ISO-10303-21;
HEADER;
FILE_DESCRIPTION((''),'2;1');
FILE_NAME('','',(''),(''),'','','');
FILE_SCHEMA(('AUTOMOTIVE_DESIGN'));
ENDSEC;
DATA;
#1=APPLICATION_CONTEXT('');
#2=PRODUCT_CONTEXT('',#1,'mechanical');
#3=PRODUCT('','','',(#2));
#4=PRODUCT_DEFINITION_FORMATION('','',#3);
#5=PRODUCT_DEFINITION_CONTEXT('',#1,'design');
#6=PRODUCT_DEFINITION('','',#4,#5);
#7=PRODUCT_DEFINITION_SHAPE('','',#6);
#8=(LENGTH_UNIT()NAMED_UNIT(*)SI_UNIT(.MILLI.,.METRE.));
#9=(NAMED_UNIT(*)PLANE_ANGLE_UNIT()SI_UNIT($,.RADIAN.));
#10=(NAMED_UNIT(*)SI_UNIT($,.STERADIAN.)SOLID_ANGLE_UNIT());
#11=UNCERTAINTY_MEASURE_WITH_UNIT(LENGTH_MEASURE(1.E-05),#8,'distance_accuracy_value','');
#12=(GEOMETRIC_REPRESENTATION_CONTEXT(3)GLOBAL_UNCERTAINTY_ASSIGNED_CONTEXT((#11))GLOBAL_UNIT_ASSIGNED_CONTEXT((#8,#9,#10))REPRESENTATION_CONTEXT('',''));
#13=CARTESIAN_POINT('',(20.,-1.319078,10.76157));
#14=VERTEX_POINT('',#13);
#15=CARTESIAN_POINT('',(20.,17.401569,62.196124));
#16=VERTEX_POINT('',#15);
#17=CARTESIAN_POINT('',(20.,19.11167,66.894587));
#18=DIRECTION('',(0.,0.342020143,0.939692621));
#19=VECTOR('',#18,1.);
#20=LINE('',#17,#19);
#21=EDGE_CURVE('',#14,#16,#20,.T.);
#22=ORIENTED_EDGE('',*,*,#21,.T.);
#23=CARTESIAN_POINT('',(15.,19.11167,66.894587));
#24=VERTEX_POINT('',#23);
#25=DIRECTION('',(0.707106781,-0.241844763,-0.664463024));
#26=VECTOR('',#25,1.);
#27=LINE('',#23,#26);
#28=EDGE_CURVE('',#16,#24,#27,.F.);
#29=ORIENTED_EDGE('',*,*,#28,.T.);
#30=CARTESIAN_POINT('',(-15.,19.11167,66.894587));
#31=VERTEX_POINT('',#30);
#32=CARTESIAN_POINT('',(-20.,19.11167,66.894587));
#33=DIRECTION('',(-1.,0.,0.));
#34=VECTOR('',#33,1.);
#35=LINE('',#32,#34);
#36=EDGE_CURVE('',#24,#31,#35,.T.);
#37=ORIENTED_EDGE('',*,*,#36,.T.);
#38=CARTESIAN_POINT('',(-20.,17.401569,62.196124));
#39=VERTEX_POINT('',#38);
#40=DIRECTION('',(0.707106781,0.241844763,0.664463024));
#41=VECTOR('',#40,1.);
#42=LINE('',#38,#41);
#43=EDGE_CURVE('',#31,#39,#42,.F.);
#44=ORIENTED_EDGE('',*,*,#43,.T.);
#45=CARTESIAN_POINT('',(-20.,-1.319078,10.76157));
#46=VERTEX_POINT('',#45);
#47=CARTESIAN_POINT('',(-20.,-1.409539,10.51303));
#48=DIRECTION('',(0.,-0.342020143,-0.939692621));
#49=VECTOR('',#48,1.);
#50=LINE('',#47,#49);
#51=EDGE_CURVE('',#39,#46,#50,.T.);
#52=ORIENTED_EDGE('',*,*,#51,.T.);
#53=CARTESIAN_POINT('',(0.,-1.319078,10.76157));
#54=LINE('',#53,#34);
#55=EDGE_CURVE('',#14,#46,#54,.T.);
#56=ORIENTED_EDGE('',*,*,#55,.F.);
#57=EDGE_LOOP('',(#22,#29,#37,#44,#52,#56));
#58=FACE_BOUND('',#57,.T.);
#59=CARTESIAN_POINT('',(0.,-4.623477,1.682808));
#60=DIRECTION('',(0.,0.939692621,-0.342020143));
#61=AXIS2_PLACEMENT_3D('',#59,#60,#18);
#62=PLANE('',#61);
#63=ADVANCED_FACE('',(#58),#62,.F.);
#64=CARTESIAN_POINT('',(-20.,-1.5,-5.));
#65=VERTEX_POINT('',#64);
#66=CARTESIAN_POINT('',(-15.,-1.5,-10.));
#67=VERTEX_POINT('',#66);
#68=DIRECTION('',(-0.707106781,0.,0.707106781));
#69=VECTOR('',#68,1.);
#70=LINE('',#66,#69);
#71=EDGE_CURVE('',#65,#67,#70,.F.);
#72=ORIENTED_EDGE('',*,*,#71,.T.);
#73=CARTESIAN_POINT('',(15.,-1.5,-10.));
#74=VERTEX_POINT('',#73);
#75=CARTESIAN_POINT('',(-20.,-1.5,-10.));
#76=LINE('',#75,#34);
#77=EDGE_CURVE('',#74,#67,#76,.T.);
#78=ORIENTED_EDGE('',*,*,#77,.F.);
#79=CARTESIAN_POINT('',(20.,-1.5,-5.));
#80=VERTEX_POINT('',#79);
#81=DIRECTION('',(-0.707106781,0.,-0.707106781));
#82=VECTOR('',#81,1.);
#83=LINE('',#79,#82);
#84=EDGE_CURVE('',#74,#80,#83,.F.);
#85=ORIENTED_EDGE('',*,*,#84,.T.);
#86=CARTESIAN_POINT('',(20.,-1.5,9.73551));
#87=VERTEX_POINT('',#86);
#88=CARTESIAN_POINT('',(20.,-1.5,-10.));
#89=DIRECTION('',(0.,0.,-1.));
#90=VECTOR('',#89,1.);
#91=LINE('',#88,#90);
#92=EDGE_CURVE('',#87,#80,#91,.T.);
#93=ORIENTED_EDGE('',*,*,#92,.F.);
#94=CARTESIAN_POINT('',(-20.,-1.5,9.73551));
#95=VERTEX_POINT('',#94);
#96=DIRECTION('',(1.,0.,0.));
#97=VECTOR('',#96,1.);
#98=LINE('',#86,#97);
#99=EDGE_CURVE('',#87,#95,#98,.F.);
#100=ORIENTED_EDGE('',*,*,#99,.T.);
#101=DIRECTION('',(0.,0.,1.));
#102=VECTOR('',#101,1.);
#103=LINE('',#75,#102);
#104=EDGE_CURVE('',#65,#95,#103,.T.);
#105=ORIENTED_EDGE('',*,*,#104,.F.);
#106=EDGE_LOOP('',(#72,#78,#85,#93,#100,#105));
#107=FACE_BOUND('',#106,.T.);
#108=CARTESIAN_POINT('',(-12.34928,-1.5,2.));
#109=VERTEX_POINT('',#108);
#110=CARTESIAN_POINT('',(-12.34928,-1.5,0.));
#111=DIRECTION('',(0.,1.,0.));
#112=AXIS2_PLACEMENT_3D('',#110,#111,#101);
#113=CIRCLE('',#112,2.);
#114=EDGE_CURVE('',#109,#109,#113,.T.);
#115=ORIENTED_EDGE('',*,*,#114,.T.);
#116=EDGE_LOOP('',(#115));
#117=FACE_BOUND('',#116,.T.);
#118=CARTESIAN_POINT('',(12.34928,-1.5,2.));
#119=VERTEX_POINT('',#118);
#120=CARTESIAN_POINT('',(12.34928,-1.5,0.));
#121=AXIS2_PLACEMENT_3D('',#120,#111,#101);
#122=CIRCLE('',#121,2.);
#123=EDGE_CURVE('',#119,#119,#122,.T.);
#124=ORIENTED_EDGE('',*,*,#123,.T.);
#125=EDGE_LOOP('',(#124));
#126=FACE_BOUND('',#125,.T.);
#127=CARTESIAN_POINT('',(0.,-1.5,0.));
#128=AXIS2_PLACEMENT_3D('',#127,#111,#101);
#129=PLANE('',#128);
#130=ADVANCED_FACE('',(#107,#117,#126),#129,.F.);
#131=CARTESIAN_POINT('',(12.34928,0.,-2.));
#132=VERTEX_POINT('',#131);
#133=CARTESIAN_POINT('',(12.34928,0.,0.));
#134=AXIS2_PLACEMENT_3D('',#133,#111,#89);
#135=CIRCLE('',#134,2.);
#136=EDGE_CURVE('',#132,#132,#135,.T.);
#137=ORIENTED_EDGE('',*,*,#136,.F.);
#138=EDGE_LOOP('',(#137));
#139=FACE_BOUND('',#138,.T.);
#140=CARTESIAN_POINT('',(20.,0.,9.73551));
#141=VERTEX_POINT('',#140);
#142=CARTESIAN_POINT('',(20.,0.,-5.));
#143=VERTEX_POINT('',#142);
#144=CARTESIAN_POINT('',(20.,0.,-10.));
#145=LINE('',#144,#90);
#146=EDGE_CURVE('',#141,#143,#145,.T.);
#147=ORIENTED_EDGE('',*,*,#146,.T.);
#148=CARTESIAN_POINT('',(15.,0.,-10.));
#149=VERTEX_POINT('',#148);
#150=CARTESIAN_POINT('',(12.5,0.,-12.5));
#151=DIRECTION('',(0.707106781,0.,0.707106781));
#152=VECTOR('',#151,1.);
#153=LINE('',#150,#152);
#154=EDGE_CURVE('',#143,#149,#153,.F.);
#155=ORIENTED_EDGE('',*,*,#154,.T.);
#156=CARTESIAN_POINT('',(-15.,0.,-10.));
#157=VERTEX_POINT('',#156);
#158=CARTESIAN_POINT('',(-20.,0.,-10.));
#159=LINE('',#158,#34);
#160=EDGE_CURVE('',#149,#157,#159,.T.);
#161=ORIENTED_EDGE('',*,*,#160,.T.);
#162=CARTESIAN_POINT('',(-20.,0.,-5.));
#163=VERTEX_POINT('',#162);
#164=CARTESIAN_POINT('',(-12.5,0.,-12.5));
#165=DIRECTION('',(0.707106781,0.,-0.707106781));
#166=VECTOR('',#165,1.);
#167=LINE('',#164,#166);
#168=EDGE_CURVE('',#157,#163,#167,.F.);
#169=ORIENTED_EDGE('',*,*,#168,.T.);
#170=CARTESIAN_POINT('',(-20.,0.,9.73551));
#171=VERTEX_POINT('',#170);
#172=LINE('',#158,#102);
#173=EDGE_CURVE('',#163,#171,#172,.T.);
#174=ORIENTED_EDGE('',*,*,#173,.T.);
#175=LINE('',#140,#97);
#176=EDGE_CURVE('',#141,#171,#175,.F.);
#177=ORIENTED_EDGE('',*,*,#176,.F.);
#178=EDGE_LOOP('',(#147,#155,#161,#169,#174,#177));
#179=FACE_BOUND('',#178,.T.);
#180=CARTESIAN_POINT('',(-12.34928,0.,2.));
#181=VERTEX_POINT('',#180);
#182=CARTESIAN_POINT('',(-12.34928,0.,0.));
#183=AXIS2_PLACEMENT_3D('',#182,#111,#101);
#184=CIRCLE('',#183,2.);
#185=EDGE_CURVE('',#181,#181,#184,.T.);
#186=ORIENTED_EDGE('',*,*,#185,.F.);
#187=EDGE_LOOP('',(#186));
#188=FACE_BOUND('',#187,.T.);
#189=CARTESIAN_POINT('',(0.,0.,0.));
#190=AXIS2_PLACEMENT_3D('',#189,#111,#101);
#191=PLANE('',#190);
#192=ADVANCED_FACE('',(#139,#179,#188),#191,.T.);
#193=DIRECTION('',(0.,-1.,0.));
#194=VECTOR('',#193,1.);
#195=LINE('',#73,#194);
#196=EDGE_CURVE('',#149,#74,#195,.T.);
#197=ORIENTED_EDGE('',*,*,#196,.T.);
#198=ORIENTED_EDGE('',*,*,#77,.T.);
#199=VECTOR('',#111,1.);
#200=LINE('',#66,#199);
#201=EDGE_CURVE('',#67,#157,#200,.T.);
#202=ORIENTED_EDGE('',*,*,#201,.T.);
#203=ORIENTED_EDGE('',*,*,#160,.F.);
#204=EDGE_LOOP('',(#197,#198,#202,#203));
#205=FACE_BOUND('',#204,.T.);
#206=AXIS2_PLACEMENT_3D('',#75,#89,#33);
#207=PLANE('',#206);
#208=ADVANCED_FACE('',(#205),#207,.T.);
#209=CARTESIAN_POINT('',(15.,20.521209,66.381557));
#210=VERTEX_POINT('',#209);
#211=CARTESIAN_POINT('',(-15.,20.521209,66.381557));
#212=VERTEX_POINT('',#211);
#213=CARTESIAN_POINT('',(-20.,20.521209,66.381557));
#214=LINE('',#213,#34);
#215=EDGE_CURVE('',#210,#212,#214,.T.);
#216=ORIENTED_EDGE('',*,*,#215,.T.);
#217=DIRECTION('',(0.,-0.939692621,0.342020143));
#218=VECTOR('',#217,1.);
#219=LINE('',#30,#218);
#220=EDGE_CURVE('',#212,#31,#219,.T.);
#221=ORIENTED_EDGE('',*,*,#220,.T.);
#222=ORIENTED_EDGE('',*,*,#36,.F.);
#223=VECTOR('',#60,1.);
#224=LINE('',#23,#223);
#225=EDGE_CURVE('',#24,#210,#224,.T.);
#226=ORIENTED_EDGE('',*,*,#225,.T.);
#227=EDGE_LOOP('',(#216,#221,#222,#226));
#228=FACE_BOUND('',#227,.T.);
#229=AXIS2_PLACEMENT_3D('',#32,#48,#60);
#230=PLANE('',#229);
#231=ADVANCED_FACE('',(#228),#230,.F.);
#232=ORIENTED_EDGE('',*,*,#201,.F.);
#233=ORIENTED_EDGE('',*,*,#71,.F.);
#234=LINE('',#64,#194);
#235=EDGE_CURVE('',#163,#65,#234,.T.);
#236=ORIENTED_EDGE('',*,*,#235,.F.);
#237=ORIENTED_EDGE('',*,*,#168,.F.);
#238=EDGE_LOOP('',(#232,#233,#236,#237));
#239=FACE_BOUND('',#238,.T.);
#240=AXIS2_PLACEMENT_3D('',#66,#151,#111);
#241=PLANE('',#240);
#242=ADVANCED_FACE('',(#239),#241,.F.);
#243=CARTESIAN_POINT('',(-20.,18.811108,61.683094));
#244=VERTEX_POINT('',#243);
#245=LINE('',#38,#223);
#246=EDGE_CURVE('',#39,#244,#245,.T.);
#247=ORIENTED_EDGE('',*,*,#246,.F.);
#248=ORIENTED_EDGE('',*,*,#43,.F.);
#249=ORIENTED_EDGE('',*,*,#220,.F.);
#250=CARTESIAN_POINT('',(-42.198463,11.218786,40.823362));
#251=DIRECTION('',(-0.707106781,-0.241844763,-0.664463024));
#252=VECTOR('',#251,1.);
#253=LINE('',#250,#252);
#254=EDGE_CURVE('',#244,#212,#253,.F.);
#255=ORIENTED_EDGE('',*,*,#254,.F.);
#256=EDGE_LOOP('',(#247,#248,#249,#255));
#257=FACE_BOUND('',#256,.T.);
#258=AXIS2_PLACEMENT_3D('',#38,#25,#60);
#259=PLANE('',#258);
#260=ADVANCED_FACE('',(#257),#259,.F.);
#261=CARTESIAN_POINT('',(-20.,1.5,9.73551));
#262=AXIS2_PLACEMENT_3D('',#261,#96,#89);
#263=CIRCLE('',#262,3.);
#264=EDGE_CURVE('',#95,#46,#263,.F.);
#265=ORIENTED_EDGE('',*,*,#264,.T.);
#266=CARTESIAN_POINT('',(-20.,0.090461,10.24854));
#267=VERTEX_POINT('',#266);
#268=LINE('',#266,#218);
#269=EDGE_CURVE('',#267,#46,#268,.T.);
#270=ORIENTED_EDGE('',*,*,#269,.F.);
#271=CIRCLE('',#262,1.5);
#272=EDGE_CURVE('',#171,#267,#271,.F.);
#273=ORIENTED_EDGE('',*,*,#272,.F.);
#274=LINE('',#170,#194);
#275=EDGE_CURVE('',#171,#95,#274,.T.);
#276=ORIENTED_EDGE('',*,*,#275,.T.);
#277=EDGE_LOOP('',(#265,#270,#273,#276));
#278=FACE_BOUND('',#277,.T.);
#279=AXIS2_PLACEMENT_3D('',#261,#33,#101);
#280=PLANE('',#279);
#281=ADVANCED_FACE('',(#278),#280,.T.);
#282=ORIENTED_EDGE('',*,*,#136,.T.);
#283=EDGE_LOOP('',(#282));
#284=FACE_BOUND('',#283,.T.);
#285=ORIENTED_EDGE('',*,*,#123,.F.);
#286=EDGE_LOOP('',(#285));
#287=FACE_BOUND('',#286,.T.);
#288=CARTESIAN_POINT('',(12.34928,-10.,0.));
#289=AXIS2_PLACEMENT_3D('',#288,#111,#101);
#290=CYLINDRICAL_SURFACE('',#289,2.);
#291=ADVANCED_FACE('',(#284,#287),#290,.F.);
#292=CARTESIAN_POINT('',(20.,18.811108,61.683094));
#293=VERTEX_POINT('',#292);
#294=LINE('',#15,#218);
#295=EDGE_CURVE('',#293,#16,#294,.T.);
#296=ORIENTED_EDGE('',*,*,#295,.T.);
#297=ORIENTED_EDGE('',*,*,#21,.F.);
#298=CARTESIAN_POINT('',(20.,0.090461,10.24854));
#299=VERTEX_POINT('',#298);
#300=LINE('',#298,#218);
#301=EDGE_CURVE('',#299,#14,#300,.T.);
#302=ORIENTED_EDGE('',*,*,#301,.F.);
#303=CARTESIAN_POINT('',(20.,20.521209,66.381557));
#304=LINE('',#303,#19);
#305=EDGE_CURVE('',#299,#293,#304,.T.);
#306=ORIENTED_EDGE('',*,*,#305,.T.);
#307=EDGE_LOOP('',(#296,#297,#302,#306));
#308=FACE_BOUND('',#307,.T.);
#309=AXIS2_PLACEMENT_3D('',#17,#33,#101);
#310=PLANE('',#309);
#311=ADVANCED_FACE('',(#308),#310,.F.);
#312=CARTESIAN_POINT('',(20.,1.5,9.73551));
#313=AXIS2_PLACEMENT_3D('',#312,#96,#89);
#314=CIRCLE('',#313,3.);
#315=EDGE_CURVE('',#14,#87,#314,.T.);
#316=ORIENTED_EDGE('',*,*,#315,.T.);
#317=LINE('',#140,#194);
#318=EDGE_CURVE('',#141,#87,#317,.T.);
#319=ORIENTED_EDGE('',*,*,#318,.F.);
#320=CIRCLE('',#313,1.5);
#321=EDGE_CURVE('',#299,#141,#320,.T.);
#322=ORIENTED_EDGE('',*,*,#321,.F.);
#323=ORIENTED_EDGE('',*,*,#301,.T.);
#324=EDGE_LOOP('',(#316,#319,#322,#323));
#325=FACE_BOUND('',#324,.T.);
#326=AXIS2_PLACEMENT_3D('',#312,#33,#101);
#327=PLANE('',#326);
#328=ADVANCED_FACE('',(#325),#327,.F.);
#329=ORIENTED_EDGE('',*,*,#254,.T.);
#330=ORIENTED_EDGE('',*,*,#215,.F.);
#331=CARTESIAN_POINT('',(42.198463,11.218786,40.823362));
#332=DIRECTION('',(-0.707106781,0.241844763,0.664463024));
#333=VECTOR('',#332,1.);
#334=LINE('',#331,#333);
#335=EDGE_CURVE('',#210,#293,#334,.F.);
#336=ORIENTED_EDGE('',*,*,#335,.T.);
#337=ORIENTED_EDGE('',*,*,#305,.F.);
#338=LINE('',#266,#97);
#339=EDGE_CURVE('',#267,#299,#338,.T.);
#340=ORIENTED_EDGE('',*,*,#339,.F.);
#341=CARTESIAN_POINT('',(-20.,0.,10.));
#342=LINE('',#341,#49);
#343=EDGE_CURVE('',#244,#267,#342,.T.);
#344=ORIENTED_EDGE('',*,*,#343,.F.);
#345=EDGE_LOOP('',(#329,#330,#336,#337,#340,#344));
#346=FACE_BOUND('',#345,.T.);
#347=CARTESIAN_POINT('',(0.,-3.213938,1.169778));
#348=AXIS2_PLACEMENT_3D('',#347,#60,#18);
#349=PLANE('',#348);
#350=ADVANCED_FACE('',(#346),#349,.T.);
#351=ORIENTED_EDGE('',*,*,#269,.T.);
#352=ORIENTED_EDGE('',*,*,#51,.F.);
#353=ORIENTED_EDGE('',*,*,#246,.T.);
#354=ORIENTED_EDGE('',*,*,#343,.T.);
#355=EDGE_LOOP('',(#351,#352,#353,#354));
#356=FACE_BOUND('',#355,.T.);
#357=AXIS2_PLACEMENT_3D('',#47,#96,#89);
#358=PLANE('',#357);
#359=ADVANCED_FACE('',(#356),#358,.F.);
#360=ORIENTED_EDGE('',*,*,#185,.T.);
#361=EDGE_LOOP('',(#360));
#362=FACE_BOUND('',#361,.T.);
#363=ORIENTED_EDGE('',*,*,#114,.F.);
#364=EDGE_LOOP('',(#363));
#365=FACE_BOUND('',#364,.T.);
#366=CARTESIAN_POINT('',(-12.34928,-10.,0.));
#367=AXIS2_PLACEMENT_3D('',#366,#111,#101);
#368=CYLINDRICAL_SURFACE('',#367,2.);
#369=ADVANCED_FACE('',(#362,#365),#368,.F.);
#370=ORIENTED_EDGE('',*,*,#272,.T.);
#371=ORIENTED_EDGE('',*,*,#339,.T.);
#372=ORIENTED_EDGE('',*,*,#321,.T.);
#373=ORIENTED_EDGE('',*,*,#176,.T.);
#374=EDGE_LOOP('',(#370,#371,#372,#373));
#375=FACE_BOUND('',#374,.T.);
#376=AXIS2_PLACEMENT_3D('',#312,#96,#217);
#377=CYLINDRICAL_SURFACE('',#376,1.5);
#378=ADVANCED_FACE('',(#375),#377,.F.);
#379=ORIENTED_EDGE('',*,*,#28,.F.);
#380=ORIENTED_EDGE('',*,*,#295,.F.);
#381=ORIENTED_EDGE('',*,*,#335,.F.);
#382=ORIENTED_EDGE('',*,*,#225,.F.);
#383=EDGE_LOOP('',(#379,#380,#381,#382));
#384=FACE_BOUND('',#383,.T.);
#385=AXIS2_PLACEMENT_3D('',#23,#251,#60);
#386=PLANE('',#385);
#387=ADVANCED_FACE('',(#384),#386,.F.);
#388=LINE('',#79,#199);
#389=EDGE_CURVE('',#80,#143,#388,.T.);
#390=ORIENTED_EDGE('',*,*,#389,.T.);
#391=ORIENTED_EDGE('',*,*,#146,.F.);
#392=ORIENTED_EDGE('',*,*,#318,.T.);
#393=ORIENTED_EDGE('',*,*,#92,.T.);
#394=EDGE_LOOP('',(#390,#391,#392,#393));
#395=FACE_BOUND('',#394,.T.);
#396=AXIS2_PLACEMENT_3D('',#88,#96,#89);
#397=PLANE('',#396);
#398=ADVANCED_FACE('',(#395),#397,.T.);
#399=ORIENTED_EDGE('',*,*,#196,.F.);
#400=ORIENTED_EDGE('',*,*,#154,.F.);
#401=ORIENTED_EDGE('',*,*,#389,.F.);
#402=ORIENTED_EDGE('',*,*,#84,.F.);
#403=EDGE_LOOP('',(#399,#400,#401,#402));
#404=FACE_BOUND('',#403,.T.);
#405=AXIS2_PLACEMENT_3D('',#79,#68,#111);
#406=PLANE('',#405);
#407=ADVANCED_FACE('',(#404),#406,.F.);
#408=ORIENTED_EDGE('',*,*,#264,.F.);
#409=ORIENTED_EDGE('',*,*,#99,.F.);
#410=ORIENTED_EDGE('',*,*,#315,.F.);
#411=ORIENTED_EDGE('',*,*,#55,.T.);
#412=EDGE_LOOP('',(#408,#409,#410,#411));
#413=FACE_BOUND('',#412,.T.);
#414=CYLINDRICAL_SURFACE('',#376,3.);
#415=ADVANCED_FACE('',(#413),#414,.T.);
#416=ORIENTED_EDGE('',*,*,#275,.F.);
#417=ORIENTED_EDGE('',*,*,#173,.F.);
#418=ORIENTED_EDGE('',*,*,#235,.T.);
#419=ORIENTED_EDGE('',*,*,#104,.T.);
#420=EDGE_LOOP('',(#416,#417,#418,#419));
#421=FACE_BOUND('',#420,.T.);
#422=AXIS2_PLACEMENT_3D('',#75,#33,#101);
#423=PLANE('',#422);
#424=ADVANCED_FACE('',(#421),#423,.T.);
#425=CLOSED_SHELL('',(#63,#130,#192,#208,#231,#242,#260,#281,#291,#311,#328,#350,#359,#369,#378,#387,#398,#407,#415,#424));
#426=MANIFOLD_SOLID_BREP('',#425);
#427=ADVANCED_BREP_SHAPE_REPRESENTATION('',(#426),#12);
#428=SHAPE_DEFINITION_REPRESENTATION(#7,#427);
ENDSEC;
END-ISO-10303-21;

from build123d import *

# Parameters (mm, degrees)
SKETCH1_W                    = 40
SKETCH1_H                    = 20
BASE_FLANGE1_DEPTH           = 1.5
SKETCH4_R                    = 2
CUT_EXTRUDE1_DEPTH           = 10
EDGE_FLANGE1_STRIP_CUT_DEPTH = 40
EDGE_FLANGE1_DEPTH           = 40
CHAMFER1_SIZE                = 5


# Sheet-metal steps are written as plain solids
with BuildPart() as part:
    # Sketch1 → Base-Flange1 (new body)
    with BuildSketch(Plane(origin=(0, 0, 0), x_dir=(1, 0, 0), z_dir=(0, 1, 0))):
        Rectangle(SKETCH1_W, SKETCH1_H)
    extrude(amount=-BASE_FLANGE1_DEPTH)

    # Sketch4 → Cut-Extrude1 (cut)
    with BuildSketch(Plane(origin=(0, 0, 0), x_dir=(1, 0, 0), z_dir=(0, 1, 0))):
        with Locations(Location((-12.349279575, 0, 0), (0, 0, 270))):
            Circle(SKETCH4_R)
        with Locations(Location((12.349279575, 0, 0), (0, 0, 270))):
            Circle(SKETCH4_R)
    extrude(amount=-CUT_EXTRUDE1_DEPTH, mode=Mode.SUBTRACT)

    # Edge-Flange1 strip (across the edge) → Edge-Flange1 strip cut (cut)
    with BuildSketch(Plane(origin=(-20, 0, 10), x_dir=(0, 0.9396926207859105, -0.3420201433256631), z_dir=(1, 0, 0))):
        Polygon((-4.397259152, 7.695663628), (-1.319077862, -0.761569959), (0.090461069, -0.248539744), (-2.987720221, 8.208693843), align=None)
    extrude(amount=EDGE_FLANGE1_STRIP_CUT_DEPTH, mode=Mode.SUBTRACT)

    # Edge-Flange1 section (across the edge) → Edge-Flange1 (add)
    with BuildSketch(Plane(origin=(-20, 0, 10), x_dir=(0, 0.9396926207859105, -0.3420201433256631), z_dir=(1, 0, 0))):
        with BuildLine():
            Line((-1.5, 0.264490471), (-1.5, 60))
            Line((-1.5, 60), (0, 60))
            Line((0, 60), (0, 0.264490471))
            ThreePointArc((0, 0.264490471), (0.02278837, 0.004018205), (0.090461069, -0.248539744))
            Line((0.090461069, -0.248539744), (-1.319077862, -0.761569959))
            ThreePointArc((-1.319077862, -0.761569959), (-1.454423259, -0.256454062), (-1.5, 0.264490471))
        make_face()
    extrude(amount=EDGE_FLANGE1_DEPTH)

    # Chamfer1
    chamfer1_edges = [part.edges().sort_by_distance(p)[0] for p in [
        (-20, 19.816439134, 66.638072355),
        (20, 19.816439134, 66.638072355),
        (-20, -0.75, -10),
        (20, -0.75, -10),
    ]]
    chamfer(chamfer1_edges, length=CHAMFER1_SIZE)


solid = part.part
